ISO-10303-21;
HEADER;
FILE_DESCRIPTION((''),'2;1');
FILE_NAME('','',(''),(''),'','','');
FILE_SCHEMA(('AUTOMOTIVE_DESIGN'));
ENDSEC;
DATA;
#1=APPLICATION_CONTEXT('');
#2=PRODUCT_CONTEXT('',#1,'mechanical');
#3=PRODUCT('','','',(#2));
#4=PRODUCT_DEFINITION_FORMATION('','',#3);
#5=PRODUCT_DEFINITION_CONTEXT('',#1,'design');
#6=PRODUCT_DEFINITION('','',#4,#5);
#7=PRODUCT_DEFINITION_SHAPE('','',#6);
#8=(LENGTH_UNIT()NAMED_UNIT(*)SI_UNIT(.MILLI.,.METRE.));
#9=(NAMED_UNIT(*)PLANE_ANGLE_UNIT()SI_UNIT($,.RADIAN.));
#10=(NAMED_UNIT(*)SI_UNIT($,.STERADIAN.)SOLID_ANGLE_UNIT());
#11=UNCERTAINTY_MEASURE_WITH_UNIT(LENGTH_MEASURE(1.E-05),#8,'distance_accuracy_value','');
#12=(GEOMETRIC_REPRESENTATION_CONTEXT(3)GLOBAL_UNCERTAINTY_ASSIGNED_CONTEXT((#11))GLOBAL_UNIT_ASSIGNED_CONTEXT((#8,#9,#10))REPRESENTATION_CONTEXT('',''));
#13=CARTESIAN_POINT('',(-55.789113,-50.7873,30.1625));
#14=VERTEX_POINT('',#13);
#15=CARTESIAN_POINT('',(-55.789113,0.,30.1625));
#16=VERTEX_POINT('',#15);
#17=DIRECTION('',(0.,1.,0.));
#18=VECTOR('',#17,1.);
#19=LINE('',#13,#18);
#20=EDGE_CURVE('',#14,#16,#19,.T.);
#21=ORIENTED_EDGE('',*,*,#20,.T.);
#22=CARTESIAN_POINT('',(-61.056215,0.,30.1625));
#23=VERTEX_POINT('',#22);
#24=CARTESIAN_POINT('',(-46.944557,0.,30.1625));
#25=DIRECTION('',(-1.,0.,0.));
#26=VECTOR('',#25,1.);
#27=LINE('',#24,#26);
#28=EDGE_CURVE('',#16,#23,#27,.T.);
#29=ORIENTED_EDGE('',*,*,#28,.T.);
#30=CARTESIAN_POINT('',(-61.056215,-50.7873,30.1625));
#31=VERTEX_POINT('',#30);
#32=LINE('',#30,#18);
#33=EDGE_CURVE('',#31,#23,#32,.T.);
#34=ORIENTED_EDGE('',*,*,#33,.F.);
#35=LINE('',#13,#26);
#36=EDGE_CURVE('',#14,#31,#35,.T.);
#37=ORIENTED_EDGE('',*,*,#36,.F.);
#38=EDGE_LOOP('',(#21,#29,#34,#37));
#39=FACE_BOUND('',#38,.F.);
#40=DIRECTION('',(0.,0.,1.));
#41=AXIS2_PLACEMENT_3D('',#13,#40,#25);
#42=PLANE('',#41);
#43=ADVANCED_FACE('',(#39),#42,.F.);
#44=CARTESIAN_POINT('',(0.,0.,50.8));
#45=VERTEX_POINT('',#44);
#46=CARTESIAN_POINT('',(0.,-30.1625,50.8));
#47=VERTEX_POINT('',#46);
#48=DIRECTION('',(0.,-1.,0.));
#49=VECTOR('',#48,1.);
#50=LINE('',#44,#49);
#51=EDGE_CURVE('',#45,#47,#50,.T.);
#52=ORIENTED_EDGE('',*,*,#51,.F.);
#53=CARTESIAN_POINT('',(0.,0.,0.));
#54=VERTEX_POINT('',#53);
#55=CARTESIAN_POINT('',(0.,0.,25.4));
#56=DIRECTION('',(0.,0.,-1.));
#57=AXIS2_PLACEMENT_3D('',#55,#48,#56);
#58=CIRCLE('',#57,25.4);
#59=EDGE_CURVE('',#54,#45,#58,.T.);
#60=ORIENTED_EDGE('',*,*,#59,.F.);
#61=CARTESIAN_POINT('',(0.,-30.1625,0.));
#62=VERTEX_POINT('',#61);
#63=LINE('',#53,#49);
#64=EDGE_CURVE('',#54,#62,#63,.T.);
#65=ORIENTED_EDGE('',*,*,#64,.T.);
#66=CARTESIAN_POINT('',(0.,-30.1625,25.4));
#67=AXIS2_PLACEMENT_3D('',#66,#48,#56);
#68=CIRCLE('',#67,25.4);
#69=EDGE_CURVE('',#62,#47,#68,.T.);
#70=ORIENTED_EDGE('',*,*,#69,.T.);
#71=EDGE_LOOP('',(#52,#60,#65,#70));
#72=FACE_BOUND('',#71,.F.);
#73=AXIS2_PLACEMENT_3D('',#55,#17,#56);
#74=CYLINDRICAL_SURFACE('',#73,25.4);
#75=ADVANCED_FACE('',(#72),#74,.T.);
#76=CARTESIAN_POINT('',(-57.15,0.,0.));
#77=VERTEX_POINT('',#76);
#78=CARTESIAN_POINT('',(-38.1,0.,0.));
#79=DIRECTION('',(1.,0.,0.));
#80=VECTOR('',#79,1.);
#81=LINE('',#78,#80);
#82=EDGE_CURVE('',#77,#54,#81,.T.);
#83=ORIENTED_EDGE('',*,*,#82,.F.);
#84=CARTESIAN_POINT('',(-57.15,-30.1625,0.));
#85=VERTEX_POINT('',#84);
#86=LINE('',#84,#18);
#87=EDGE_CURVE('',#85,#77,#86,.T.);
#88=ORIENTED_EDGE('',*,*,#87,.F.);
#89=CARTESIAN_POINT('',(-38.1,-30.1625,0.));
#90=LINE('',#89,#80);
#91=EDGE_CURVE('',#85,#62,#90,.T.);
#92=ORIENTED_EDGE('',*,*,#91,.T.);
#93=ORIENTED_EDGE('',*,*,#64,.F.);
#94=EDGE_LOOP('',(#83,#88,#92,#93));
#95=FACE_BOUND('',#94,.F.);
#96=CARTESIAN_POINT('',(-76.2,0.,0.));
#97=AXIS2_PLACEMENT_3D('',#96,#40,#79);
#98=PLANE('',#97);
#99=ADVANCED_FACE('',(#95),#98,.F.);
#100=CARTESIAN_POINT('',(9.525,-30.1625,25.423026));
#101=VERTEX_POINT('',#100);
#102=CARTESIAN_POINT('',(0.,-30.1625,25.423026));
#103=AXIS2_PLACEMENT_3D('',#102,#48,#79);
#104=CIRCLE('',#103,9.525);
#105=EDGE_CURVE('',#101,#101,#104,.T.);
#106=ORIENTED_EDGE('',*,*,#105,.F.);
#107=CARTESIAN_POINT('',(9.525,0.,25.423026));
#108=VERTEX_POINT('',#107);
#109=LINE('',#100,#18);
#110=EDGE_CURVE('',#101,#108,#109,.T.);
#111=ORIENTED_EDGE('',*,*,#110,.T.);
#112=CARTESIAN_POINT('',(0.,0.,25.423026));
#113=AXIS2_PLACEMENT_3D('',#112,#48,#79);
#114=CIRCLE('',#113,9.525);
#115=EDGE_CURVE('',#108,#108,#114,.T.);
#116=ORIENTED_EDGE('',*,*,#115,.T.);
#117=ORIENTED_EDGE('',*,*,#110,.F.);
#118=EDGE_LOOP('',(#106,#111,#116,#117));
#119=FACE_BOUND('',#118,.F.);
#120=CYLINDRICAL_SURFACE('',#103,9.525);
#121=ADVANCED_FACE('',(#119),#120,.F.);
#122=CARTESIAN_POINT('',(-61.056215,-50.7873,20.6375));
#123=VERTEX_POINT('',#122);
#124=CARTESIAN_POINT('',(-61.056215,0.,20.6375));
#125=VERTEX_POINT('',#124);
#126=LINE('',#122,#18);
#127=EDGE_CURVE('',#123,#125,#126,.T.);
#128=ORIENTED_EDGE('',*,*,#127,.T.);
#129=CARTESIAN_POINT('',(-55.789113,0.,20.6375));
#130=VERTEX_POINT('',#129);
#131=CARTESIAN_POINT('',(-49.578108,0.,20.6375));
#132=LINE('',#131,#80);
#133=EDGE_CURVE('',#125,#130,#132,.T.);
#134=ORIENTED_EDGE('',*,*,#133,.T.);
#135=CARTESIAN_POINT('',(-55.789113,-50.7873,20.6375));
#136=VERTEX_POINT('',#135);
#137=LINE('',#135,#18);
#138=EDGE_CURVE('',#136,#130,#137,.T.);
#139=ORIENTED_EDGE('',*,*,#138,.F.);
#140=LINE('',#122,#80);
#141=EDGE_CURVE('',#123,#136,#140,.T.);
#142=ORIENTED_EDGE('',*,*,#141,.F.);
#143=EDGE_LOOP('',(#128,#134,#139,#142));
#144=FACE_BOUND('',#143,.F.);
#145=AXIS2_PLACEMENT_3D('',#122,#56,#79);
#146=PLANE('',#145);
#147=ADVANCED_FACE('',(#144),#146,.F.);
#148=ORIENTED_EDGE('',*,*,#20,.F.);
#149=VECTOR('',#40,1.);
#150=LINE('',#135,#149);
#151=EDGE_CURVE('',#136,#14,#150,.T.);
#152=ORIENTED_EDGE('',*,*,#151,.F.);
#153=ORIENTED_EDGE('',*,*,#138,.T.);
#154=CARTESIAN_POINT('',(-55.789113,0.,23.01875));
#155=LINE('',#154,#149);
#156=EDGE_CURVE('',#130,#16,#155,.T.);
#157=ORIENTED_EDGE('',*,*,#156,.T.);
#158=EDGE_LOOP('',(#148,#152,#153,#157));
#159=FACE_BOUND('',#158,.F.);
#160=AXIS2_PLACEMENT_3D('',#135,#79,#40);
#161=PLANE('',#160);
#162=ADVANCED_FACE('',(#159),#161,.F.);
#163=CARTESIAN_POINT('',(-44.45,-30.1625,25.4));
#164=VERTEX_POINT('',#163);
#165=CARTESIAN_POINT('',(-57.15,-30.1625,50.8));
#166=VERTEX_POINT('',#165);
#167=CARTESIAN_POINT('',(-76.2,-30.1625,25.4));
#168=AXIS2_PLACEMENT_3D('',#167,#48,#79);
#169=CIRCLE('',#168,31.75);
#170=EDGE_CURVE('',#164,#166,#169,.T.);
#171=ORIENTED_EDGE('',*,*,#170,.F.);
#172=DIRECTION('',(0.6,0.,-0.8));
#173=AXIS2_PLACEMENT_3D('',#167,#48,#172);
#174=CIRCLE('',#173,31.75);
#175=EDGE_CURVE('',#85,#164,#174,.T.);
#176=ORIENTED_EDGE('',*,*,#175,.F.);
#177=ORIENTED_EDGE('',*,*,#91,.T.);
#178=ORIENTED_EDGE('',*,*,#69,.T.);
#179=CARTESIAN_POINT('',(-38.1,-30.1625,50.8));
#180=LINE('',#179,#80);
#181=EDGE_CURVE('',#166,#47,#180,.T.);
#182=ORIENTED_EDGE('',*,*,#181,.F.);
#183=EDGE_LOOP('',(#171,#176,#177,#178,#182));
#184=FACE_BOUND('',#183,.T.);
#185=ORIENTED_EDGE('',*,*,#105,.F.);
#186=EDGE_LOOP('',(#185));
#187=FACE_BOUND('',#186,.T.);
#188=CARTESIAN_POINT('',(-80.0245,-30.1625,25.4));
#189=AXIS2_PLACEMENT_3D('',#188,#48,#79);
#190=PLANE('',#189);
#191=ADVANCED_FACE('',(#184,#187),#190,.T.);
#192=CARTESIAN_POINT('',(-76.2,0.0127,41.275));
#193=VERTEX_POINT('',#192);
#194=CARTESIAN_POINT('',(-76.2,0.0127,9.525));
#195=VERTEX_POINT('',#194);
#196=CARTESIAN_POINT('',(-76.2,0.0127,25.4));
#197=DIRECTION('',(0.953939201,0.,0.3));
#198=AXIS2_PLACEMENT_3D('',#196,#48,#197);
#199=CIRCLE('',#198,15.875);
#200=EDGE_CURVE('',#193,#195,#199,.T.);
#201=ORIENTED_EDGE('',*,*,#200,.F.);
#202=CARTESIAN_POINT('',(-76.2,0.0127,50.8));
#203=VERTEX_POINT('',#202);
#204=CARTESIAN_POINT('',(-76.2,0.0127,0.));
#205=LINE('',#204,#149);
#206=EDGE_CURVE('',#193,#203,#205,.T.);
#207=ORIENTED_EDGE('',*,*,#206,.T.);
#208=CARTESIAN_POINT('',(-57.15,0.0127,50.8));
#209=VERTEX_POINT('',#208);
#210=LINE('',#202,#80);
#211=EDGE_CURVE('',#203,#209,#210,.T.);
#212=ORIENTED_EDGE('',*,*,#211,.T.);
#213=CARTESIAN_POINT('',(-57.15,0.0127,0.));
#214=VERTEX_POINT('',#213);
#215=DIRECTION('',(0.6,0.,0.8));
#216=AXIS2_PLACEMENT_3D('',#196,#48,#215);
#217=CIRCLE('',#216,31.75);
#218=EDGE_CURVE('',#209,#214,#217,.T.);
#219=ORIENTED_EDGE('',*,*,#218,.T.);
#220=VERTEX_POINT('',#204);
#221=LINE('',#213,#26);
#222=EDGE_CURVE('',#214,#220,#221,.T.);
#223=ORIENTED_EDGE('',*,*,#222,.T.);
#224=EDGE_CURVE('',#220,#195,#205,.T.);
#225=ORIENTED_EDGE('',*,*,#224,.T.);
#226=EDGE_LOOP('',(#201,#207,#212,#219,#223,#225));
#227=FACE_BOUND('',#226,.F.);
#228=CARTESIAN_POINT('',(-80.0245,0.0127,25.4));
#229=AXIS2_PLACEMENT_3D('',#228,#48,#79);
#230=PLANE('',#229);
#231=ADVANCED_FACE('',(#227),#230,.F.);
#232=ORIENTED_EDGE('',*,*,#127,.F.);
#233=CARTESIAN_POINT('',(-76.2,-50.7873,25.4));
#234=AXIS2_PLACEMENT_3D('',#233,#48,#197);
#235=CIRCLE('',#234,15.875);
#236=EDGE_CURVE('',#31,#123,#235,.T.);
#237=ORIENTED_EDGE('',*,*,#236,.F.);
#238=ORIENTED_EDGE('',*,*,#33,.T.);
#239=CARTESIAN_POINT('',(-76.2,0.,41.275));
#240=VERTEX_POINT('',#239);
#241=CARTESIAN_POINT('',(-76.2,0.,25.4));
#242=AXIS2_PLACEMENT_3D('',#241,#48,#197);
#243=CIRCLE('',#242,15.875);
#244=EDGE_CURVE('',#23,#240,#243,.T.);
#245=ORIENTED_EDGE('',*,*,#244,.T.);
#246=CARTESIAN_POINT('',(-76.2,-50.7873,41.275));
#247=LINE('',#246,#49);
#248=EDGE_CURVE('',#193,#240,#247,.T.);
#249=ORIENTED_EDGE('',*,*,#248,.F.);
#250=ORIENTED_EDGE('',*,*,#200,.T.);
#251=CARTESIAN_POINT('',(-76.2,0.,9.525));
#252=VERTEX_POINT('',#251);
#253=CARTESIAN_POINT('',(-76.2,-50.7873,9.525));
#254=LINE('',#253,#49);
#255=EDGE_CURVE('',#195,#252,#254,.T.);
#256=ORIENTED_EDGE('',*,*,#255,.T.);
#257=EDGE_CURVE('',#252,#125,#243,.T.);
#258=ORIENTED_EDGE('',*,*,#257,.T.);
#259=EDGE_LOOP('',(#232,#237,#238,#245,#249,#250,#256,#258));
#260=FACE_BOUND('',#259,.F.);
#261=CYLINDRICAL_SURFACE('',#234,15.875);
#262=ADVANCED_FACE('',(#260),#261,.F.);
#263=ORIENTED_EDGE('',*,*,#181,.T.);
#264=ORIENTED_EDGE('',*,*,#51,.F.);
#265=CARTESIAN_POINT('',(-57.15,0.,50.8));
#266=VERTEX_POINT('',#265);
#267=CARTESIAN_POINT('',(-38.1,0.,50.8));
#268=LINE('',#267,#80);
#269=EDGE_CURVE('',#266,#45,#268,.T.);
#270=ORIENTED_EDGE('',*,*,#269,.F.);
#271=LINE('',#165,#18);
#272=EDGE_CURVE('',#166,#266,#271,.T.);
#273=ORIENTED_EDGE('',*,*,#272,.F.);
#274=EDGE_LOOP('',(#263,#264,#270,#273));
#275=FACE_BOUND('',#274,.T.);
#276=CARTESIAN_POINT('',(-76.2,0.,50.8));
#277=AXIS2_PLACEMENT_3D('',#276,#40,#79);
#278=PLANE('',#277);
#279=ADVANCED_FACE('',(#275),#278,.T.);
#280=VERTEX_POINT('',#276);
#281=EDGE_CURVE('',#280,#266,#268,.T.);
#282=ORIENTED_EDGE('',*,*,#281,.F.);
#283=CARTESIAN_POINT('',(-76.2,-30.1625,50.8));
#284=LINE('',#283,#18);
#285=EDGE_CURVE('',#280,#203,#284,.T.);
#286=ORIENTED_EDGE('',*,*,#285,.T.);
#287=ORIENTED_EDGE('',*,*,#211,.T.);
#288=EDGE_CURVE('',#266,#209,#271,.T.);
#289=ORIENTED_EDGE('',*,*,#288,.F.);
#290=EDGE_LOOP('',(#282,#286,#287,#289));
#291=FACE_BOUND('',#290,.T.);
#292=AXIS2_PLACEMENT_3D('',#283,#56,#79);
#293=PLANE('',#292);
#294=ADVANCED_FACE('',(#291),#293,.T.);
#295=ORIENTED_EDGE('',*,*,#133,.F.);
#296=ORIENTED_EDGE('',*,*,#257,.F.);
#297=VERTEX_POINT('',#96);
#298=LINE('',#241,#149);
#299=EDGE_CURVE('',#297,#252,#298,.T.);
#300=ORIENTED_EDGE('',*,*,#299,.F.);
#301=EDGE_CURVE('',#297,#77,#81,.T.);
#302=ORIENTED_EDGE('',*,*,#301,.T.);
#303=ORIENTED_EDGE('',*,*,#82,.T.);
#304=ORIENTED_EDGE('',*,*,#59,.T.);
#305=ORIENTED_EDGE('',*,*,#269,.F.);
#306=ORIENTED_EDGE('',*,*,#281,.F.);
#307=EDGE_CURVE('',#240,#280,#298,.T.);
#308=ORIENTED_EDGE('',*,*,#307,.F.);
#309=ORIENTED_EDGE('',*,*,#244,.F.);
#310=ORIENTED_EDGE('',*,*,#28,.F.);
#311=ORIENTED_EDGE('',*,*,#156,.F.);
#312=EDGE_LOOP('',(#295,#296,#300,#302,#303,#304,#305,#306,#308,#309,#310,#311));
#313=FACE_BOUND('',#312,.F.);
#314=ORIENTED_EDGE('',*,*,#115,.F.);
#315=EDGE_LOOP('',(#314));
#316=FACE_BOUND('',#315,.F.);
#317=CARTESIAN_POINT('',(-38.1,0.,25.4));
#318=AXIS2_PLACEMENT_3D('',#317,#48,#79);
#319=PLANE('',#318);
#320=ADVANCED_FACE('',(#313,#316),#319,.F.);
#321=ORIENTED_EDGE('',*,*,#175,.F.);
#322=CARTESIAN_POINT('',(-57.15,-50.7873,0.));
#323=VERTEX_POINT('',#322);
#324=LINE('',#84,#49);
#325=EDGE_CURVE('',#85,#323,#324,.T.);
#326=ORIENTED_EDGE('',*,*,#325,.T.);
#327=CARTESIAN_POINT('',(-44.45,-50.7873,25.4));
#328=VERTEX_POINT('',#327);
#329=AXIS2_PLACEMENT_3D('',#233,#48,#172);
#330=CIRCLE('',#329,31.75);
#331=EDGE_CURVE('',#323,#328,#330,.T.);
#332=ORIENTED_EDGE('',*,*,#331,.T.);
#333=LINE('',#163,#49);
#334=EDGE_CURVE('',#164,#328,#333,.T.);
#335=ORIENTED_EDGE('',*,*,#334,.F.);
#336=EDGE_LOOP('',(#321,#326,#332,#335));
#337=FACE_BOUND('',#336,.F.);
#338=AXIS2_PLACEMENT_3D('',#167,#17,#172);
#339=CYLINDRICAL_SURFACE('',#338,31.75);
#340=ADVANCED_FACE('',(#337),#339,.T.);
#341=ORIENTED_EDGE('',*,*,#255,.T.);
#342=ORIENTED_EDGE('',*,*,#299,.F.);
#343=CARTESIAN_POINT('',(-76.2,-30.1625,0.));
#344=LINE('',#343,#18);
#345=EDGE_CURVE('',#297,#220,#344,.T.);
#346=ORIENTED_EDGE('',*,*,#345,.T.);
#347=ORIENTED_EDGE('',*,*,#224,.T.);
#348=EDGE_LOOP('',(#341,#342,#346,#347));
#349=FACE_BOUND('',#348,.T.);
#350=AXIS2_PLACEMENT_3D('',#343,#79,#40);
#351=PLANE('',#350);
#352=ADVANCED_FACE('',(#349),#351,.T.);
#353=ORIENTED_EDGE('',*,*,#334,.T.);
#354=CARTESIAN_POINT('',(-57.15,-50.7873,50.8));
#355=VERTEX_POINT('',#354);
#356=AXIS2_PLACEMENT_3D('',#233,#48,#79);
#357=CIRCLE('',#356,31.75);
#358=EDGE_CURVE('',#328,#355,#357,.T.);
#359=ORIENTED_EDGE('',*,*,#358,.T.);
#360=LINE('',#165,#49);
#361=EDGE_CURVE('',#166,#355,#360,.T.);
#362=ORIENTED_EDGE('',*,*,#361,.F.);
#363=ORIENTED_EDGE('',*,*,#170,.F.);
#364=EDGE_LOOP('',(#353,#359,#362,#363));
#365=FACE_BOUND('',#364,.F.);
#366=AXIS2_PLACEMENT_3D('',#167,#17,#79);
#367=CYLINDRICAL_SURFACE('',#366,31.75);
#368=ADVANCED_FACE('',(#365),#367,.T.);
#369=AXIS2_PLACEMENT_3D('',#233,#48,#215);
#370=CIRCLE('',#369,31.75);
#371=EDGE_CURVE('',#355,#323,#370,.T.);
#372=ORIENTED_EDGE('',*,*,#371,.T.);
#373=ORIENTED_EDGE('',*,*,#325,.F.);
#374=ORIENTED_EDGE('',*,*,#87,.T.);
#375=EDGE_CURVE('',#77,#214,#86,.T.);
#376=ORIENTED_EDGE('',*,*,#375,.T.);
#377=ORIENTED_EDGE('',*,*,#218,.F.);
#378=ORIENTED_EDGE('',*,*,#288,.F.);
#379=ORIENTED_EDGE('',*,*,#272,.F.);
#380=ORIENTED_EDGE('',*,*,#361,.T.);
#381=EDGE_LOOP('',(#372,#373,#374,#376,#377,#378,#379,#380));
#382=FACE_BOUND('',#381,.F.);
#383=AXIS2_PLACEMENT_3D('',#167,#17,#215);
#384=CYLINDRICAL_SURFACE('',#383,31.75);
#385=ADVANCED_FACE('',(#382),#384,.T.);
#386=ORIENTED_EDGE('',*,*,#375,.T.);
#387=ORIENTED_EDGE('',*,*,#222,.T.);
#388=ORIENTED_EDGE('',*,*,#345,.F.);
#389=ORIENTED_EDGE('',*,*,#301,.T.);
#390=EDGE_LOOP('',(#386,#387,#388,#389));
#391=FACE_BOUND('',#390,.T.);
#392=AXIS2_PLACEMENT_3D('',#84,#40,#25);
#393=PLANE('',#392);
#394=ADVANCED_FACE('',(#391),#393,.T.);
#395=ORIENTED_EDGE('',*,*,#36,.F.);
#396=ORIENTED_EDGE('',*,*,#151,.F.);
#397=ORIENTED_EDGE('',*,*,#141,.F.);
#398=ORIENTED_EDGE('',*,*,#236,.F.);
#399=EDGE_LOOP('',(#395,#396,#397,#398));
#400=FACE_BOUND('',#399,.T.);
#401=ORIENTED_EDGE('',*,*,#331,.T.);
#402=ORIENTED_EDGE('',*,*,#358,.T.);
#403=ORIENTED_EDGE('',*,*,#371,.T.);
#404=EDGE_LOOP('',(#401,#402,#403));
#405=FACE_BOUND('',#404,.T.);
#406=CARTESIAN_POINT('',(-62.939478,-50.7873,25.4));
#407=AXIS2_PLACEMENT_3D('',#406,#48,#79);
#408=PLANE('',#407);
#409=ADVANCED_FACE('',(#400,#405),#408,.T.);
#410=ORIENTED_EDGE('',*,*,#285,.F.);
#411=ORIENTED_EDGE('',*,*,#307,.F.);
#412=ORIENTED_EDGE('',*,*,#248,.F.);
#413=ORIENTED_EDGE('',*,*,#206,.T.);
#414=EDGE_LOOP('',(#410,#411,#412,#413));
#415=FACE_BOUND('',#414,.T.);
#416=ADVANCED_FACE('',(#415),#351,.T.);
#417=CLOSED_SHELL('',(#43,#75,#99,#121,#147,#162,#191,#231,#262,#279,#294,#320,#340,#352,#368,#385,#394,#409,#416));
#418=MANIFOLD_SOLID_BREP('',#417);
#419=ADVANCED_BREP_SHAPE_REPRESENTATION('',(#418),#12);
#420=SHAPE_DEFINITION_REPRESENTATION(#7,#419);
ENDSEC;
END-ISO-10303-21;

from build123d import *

# Parameters (mm, degrees)
F0_W     = 76.2
F0_H     = 50.8
F1_DEPTH = 30.1625
F3_DEPTH = 30.1752
F4_DEPTH = 20.6248
F5_DEPTH = 20.6248
F7_DEPTH = 50.8
F8_R     = 9.525
F9_DEPTH = 30.1752


with BuildPart() as f1:
    # F0 (on Front) → F1 (new body)
    with BuildSketch(Plane.XZ):
        with Locations((-38.1, 25.4)):
            Rectangle(F0_W, F0_H)
        with BuildLine():
            Line((0, 50.8), (0, 0))
            ThreePointArc((0, 0), (25.4, 25.4), (0, 50.8))
        make_face()
    extrude(amount=F1_DEPTH)

    # F2 (on face) → F3 (join)
    with BuildSketch(Plane.XZ.offset(30.1625)):
        with BuildLine():
            Line((-76.2, 50.8), (-57.15, 50.8))
            ThreePointArc((-57.15, 50.8), (-107.95, 25.4), (-57.15, 0))
            Line((-57.15, 0), (-76.2, 0))
            Line((-76.2, 0), (-76.2, 50.8))
        make_face()
    extrude(amount=-F3_DEPTH)

    # F2 (on face) → F4 (join)
    with BuildSketch(Plane.XZ.offset(30.1625)):
        with BuildLine():
            Line((-76.2, 50.8), (-57.15, 50.8))
            ThreePointArc((-57.15, 50.8), (-107.95, 25.4), (-57.15, 0))
            Line((-57.15, 0), (-76.2, 0))
            Line((-76.2, 0), (-76.2, 50.8))
        make_face()
    extrude(amount=F4_DEPTH)

    # F2 (on face) → F5 (join)
    with BuildSketch(Plane.XZ.offset(30.1625)):
        with BuildLine():
            ThreePointArc((-57.15, 0), (-47.8019366858, 11.2009683429), (-44.45, 25.4))
            ThreePointArc((-44.45, 25.4), (-47.8019366858, 39.5990316571), (-57.15, 50.8))
            Line((-57.15, 50.8), (-76.2, 50.8))
            Line((-76.2, 50.8), (-76.2, 0))
            Line((-76.2, 0), (-57.15, 0))
        make_face()
        with BuildLine():
            Line((-76.2, 50.8), (-57.15, 50.8))
            ThreePointArc((-57.15, 50.8), (-107.95, 25.4), (-57.15, 0))
            Line((-57.15, 0), (-76.2, 0))
            Line((-76.2, 0), (-76.2, 50.8))
        make_face()
    extrude(amount=F5_DEPTH)

    # F6 (on face) → F7 (cut)
    with BuildSketch(Plane.XZ.offset(50.7873)):
        with BuildLine():
            Line((-76.2, 25.4), (-60.325, 25.4))
            ThreePointArc((-60.325, 25.4), (-60.5088686027, 27.8091534761), (-61.0562151775, 30.1625))
            ThreePointArc((-61.0562151775, 30.1625), (-66.8082233443, 38.1988341754), (-76.2, 41.275))
            Line((-76.2, 41.275), (-76.2, 25.4))
        make_face()
        with BuildLine():
            Line((-55.7891130447, 25.4), (-60.325, 25.4))
            ThreePointArc((-60.325, 25.4), (-60.5088686027, 22.9908465239), (-61.0562151775, 20.6375))
            Line((-61.0562151775, 20.6375), (-55.7891130447, 20.6375))
            Line((-55.7891130447, 20.6375), (-55.7891130447, 25.4))
        make_face()
        with BuildLine():
            ThreePointArc((-61.0562151775, 20.6375), (-60.5088686027, 22.9908465239), (-60.325, 25.4))
            Line((-60.325, 25.4), (-76.2, 25.4))
            Line((-76.2, 25.4), (-76.2, 9.525))
            ThreePointArc((-76.2, 9.525), (-66.8082233443, 12.6011658246), (-61.0562151775, 20.6375))
        make_face()
        with BuildLine():
            ThreePointArc((-61.0562151775, 30.1625), (-60.5088686027, 27.8091534761), (-60.325, 25.4))
            Line((-60.325, 25.4), (-55.7891130447, 25.4))
            Line((-55.7891130447, 25.4), (-55.7891130447, 30.1625))
            Line((-55.7891130447, 30.1625), (-61.0562151775, 30.1625))
        make_face()
        with BuildLine():
            Line((-76.2, 9.525), (-76.2, 25.4))
            Line((-76.2, 25.4), (-76.2, 41.275))
            ThreePointArc((-76.2, 41.275), (-92.075, 25.4), (-76.2, 9.525))
        make_face()
    extrude(amount=-F7_DEPTH, mode=Mode.SUBTRACT)

    # F8 (on face) → F9 (cut)
    with BuildSketch(Plane.XZ.offset(30.1625)):
        with Locations((0, 25.4230257124)):
            Circle(F8_R)
    extrude(amount=-F9_DEPTH, mode=Mode.SUBTRACT)


solid = f1.part
